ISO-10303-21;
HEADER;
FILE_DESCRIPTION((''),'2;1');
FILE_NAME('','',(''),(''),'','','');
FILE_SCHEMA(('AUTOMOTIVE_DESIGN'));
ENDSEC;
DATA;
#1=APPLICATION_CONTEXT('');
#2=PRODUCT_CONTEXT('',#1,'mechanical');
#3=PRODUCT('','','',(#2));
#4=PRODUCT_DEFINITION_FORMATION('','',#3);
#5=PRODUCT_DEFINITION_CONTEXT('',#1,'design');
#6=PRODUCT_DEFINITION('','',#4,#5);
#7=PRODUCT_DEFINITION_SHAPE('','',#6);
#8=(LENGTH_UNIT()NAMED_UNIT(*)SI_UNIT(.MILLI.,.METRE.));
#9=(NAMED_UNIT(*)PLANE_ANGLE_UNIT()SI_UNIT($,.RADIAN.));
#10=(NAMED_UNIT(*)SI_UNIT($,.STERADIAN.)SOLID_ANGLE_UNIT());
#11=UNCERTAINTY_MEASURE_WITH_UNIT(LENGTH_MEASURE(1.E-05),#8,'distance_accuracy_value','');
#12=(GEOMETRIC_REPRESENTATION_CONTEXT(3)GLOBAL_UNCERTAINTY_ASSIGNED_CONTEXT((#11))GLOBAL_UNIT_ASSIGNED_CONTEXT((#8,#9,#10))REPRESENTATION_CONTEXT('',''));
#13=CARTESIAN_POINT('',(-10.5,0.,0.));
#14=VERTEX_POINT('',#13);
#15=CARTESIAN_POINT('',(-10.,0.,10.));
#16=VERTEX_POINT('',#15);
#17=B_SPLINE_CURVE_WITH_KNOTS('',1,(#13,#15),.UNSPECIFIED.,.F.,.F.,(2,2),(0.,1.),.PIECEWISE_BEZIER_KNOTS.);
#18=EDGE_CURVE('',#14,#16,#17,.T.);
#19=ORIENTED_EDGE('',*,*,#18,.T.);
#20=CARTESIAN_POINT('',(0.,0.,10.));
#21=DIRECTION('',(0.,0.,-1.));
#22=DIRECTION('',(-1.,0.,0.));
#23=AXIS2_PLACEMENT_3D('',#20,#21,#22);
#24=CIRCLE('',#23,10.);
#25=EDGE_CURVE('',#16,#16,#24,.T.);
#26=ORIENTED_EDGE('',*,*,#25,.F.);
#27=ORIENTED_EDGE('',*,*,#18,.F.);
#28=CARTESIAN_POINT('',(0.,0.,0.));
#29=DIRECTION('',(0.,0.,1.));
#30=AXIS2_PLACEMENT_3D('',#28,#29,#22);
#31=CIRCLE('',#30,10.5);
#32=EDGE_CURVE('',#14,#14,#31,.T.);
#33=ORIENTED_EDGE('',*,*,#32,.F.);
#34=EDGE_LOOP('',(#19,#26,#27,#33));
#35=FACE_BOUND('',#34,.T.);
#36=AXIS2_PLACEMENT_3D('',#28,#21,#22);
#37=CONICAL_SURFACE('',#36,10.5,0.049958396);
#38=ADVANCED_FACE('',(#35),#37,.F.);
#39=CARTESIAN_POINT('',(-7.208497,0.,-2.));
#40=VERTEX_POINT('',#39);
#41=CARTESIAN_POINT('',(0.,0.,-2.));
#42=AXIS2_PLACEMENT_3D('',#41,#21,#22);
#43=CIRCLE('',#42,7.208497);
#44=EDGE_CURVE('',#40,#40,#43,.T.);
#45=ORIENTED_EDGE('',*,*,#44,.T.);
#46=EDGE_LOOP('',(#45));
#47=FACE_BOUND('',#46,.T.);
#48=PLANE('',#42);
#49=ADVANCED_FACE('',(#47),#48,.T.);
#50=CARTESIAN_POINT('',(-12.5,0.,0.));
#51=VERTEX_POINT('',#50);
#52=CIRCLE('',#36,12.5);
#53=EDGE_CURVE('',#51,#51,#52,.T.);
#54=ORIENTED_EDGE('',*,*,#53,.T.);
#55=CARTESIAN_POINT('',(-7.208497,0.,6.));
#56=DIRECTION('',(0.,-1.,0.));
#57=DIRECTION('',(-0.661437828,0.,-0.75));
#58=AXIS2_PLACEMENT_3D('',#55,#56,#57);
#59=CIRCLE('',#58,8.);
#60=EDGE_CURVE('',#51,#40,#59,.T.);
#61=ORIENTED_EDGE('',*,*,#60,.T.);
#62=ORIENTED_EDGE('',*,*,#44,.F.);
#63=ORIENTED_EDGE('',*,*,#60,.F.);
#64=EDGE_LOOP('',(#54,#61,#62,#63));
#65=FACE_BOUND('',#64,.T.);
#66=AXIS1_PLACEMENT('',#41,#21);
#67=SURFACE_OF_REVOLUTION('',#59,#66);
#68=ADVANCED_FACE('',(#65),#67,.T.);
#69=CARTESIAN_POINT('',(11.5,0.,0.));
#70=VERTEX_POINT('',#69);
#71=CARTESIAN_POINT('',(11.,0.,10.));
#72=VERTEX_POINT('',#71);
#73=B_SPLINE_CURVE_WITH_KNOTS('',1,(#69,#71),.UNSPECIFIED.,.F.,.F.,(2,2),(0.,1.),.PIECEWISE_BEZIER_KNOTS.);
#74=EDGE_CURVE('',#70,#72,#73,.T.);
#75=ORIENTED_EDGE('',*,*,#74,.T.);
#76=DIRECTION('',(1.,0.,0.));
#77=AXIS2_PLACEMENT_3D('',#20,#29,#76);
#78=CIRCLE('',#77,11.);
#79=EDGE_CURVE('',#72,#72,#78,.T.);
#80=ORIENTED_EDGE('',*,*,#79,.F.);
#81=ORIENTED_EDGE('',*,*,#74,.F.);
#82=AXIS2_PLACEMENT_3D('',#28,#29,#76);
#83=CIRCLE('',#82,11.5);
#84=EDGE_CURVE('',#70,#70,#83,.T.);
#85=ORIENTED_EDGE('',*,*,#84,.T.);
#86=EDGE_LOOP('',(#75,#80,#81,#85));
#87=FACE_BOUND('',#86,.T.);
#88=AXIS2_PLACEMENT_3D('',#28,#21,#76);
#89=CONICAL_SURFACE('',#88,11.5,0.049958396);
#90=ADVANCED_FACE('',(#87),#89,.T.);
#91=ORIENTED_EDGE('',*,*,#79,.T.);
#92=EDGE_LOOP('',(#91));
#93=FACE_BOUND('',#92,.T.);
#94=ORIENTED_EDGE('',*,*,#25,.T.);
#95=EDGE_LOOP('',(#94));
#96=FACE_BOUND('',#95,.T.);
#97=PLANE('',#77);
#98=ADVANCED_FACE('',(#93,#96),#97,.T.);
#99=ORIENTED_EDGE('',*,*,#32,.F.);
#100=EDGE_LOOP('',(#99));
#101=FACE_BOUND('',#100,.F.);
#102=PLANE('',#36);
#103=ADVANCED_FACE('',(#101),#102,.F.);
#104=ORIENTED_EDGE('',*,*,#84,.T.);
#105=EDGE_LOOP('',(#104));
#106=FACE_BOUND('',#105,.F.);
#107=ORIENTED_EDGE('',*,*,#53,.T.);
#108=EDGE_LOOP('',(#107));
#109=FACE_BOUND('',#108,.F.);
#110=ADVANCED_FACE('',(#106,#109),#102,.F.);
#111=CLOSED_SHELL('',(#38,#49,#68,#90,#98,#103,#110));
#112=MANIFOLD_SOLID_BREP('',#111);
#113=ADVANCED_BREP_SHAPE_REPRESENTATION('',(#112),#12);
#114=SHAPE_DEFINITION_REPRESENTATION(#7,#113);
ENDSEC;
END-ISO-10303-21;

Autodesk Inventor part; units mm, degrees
ref_plane "YZ Plane" through (0, 0, 0) normal (1, 0, 0) x (0, 1, 0)
ref_plane "XZ Plane" through (0, 0, 0) normal (0, 1, 0) x (-1, 0, 0)
sketch "Эскиз1" plane through (0, 0, 0) normal (0, 0, 1) x (1, 0, 0)
  circle A0 centre (0, 0) radius 11.5
  circle A1 centre (0, 0) radius 10.5
  dimension "d0" = 23
  dimension "d7" = 21
ref_plane "РабПлоскость1" through (0, 0, 10) normal (0, 0, 1) x (1, 0, 0)
sketch "Эскиз2" plane through (0, 0, 10) normal (0, 0, 1) x (1, 0, 0)
  circle A0 centre (0, 0) radius 11
  circle A1 centre (0, 0) radius 10
  dimension "d2" = 22
  dimension "d8" = 20
loft "Лофт1" add profiles "Эскиз1", "Эскиз2" contours A0 | A1 / A0 | A1
sketch "Эскиз4" plane through (0, 0, 0) normal (0, 0, -1) x (-1, 0, 0)
  circle A0 centre (0, 0) radius 10.5
  circle A1 centre (0, 0) radius 11.5 projected
  dimension "d10" = 21
sketch "Эскиз3" plane through (0, 0, 10) normal (0, 0, 1) x (1, 0, 0)
  circle A0 centre (0, 0) radius 10
  circle A1 centre (0, 0) radius 11 projected
  dimension "d9" = 20
loft "Лофт2" cut profiles "Эскиз4", "Эскиз3" contours A0 / A0
sketch "Эскиз5" plane through (0, 0, 0) normal (0, 0, -1) x (-1, 0, 0)
  circle A0 centre (0, 0) radius 12.5
  dimension "d15" = 25
extrude "Выдавливание1" add sketch "Эскиз5" along normal blind 2
fillet "Сопряжение1" radius 8 1 edges at (12.5, 0, -2)
properties part number "Стул ВВ"
